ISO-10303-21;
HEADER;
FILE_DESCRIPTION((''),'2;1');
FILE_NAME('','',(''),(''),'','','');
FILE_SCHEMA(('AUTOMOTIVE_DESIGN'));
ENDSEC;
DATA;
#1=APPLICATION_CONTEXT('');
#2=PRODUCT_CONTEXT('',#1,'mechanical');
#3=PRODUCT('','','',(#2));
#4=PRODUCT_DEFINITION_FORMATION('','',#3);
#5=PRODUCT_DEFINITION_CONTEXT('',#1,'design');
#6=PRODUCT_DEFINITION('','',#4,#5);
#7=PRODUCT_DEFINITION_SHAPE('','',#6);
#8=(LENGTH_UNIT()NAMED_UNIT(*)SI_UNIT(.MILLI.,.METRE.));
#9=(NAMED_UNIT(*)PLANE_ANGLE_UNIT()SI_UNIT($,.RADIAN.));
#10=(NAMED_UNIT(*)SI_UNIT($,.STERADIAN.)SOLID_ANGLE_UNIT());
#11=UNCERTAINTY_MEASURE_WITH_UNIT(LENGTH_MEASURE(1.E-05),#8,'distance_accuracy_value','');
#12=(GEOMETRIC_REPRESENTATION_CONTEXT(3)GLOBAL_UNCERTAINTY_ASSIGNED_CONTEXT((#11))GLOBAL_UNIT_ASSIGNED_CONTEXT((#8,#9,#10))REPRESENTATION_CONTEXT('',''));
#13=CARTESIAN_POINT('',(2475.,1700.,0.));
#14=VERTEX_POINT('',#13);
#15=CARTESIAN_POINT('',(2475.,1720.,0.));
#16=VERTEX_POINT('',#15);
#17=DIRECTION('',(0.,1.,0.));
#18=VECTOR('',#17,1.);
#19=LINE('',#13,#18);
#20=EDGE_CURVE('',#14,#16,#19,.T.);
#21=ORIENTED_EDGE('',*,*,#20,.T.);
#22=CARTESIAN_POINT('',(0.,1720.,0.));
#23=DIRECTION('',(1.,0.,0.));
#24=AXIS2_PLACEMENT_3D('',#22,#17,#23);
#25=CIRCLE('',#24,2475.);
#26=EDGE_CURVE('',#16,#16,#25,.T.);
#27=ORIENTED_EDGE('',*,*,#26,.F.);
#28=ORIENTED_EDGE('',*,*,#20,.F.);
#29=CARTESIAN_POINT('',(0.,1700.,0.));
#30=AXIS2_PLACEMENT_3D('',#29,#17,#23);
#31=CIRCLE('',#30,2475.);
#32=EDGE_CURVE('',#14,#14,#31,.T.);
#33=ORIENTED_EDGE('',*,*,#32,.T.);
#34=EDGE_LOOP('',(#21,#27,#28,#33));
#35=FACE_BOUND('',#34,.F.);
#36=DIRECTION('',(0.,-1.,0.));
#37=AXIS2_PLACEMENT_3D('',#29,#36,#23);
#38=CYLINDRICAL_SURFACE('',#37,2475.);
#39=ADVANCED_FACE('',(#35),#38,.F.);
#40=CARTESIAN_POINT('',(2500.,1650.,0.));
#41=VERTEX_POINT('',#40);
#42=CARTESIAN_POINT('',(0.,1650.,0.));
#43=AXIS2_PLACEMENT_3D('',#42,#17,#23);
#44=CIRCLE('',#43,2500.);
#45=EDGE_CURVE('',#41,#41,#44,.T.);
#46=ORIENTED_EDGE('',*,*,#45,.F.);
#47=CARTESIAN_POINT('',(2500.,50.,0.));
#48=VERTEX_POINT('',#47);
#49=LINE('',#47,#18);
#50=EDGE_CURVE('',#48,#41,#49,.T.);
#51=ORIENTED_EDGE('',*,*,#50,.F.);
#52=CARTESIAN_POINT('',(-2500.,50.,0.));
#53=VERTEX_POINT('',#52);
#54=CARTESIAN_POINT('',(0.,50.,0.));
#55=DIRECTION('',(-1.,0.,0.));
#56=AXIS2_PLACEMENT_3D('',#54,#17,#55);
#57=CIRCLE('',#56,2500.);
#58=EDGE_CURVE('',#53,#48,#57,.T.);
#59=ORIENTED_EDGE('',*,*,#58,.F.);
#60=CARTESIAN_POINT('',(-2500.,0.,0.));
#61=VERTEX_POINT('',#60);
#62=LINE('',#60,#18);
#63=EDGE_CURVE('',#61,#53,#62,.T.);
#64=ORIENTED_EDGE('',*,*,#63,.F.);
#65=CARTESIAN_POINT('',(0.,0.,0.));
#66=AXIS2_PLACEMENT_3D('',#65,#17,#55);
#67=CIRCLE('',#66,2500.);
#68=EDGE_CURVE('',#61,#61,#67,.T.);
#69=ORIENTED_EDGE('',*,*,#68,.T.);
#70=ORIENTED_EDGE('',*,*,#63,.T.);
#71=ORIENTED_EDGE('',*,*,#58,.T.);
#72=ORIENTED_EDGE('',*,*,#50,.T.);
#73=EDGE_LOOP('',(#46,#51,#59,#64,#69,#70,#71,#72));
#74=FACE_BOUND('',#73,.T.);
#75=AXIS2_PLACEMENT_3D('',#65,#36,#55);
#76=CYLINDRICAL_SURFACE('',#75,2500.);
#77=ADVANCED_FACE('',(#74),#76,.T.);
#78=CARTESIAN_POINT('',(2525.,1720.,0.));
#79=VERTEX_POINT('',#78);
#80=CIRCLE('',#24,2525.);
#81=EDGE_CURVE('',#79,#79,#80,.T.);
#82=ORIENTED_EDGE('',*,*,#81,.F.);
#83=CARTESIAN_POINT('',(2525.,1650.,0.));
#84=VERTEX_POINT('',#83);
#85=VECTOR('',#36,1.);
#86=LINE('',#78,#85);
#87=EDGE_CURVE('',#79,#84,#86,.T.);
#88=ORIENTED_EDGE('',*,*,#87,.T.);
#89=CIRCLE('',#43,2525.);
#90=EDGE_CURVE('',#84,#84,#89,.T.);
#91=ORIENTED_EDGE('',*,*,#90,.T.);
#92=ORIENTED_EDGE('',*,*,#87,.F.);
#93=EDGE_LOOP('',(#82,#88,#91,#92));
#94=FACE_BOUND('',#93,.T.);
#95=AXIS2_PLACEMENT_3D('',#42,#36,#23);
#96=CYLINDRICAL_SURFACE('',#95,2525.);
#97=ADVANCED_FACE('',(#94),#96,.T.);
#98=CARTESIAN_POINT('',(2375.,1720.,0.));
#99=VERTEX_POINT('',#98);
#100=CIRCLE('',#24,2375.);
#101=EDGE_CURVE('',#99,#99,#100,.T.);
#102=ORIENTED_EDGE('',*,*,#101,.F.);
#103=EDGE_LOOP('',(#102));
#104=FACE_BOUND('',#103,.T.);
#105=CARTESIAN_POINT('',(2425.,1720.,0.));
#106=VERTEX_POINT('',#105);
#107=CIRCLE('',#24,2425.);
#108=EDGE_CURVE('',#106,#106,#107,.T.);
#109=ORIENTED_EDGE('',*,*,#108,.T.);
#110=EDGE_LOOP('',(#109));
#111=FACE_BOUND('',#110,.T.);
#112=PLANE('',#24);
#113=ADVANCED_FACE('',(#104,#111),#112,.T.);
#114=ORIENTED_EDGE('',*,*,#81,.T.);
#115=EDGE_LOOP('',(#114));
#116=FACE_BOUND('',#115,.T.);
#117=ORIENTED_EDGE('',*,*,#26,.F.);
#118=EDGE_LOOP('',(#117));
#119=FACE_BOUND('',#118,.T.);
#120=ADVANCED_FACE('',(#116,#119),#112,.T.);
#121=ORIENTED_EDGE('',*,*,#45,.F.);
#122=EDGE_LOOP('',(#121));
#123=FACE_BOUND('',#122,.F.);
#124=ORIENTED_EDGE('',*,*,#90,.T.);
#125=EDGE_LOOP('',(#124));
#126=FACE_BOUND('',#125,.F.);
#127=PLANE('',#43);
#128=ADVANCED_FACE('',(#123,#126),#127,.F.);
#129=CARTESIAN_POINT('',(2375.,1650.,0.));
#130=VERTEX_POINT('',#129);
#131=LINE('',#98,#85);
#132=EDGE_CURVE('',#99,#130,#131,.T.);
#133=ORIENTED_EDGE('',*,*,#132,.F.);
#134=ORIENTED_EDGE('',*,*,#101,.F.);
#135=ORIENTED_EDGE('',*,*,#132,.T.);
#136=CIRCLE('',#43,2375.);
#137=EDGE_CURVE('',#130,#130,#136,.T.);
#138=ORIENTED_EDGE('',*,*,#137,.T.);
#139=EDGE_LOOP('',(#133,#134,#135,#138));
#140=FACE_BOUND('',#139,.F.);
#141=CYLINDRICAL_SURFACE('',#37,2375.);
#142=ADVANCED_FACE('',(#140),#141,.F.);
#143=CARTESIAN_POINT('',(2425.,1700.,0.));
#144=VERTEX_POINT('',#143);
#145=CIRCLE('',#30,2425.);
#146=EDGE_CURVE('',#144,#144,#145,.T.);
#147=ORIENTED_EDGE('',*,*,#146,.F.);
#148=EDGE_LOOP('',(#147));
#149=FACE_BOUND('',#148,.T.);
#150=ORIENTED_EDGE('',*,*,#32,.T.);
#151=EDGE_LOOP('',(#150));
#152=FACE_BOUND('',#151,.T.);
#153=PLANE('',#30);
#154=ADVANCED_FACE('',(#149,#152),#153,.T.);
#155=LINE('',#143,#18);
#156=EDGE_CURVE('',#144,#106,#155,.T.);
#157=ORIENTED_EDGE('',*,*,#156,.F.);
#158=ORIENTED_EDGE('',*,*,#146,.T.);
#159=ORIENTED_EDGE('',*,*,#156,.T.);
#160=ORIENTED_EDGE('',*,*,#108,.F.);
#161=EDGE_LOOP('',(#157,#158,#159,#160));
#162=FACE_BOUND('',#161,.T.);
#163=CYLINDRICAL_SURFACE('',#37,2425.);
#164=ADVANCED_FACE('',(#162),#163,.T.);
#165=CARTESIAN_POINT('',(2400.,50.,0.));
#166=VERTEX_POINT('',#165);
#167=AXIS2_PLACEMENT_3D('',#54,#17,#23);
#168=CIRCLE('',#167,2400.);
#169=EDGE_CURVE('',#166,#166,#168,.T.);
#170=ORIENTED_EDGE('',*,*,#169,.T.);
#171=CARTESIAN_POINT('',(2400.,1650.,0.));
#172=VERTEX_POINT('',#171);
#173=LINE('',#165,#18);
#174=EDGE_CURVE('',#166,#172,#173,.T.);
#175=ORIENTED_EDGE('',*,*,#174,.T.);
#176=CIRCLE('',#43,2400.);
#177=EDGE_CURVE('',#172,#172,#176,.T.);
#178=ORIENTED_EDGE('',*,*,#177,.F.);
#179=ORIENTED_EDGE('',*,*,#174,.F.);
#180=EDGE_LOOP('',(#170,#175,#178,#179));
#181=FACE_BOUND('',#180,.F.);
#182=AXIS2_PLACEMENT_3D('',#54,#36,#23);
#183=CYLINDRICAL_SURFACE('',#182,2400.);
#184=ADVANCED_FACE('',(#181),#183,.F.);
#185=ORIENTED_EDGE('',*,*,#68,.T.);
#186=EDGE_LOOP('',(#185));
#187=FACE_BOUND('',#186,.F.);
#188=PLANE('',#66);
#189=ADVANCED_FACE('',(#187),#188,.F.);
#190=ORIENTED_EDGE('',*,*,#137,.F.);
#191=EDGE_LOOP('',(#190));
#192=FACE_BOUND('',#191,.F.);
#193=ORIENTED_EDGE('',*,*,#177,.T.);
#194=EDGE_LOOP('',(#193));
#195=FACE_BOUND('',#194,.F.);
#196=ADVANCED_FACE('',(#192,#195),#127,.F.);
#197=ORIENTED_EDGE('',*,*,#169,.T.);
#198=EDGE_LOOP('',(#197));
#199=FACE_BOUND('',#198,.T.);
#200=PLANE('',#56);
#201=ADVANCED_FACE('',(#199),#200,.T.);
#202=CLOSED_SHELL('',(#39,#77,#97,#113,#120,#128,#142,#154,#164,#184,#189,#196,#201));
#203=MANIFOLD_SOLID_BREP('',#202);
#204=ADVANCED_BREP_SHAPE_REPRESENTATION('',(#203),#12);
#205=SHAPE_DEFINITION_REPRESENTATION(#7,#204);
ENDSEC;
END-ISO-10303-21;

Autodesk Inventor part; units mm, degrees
ref_plane "YZ Plane" through (0, 0, 0) normal (1, 0, 0) x (0, 1, 0)
ref_plane "XZ Plane" through (0, 0, 0) normal (0, 1, 0) x (-1, 0, 0)
ref_plane "XY Plane" through (0, 0, 0) normal (0, 0, 1) x (1, 0, 0)
sketch "Sketch1" plane through (0, 0, 0) normal (0, 1, 0) x (-1, 0, 0)
  circle A0 centre (0, 0) radius 2500
extrude "Floor" add sketch "Sketch1" along normal blind 50
sketch "Sketch2" plane through (0, 50, 0) normal (0, 1, 0) x (1, 0, 0)
  circle A0 centre (0, 0) radius 2400
  circle A1 centre (0, 0) radius 2500
extrude "Wall" add sketch "Sketch2" along normal blind 1600
sketch "Sketch3" plane through (0, 1650, 0) normal (0, 1, 0) x (1, 0, 0)
  point P0 (0, 0)
sketch "Sketch4" plane through (0, 1650, 0) normal (0, 1, 0) x (1, 0, 0)
  circle A0 centre (0, 0) radius 2525
  circle A1 centre (0, 0) radius 2375
  dimension "d4" = 5050
  dimension "d5" = 4750
extrude "Extrusion3" add sketch "Sketch4" along normal blind 50
sketch "Sketch5" plane through (0, 1700, 0) normal (0, 1, 0) x (1, 0, 0)
  circle A0 centre (0, 0) radius 2525
  circle A1 centre (0, 0) radius 2375 projected
  circle A2 centre (0, 0) radius 2375
  circle A3 centre (0, 0) radius 2425
  circle A4 centre (0, 0) radius 2475
extrude "Extrusion4" add sketch "Sketch5" along normal blind 20
properties part number "ObservatoryFloor"
